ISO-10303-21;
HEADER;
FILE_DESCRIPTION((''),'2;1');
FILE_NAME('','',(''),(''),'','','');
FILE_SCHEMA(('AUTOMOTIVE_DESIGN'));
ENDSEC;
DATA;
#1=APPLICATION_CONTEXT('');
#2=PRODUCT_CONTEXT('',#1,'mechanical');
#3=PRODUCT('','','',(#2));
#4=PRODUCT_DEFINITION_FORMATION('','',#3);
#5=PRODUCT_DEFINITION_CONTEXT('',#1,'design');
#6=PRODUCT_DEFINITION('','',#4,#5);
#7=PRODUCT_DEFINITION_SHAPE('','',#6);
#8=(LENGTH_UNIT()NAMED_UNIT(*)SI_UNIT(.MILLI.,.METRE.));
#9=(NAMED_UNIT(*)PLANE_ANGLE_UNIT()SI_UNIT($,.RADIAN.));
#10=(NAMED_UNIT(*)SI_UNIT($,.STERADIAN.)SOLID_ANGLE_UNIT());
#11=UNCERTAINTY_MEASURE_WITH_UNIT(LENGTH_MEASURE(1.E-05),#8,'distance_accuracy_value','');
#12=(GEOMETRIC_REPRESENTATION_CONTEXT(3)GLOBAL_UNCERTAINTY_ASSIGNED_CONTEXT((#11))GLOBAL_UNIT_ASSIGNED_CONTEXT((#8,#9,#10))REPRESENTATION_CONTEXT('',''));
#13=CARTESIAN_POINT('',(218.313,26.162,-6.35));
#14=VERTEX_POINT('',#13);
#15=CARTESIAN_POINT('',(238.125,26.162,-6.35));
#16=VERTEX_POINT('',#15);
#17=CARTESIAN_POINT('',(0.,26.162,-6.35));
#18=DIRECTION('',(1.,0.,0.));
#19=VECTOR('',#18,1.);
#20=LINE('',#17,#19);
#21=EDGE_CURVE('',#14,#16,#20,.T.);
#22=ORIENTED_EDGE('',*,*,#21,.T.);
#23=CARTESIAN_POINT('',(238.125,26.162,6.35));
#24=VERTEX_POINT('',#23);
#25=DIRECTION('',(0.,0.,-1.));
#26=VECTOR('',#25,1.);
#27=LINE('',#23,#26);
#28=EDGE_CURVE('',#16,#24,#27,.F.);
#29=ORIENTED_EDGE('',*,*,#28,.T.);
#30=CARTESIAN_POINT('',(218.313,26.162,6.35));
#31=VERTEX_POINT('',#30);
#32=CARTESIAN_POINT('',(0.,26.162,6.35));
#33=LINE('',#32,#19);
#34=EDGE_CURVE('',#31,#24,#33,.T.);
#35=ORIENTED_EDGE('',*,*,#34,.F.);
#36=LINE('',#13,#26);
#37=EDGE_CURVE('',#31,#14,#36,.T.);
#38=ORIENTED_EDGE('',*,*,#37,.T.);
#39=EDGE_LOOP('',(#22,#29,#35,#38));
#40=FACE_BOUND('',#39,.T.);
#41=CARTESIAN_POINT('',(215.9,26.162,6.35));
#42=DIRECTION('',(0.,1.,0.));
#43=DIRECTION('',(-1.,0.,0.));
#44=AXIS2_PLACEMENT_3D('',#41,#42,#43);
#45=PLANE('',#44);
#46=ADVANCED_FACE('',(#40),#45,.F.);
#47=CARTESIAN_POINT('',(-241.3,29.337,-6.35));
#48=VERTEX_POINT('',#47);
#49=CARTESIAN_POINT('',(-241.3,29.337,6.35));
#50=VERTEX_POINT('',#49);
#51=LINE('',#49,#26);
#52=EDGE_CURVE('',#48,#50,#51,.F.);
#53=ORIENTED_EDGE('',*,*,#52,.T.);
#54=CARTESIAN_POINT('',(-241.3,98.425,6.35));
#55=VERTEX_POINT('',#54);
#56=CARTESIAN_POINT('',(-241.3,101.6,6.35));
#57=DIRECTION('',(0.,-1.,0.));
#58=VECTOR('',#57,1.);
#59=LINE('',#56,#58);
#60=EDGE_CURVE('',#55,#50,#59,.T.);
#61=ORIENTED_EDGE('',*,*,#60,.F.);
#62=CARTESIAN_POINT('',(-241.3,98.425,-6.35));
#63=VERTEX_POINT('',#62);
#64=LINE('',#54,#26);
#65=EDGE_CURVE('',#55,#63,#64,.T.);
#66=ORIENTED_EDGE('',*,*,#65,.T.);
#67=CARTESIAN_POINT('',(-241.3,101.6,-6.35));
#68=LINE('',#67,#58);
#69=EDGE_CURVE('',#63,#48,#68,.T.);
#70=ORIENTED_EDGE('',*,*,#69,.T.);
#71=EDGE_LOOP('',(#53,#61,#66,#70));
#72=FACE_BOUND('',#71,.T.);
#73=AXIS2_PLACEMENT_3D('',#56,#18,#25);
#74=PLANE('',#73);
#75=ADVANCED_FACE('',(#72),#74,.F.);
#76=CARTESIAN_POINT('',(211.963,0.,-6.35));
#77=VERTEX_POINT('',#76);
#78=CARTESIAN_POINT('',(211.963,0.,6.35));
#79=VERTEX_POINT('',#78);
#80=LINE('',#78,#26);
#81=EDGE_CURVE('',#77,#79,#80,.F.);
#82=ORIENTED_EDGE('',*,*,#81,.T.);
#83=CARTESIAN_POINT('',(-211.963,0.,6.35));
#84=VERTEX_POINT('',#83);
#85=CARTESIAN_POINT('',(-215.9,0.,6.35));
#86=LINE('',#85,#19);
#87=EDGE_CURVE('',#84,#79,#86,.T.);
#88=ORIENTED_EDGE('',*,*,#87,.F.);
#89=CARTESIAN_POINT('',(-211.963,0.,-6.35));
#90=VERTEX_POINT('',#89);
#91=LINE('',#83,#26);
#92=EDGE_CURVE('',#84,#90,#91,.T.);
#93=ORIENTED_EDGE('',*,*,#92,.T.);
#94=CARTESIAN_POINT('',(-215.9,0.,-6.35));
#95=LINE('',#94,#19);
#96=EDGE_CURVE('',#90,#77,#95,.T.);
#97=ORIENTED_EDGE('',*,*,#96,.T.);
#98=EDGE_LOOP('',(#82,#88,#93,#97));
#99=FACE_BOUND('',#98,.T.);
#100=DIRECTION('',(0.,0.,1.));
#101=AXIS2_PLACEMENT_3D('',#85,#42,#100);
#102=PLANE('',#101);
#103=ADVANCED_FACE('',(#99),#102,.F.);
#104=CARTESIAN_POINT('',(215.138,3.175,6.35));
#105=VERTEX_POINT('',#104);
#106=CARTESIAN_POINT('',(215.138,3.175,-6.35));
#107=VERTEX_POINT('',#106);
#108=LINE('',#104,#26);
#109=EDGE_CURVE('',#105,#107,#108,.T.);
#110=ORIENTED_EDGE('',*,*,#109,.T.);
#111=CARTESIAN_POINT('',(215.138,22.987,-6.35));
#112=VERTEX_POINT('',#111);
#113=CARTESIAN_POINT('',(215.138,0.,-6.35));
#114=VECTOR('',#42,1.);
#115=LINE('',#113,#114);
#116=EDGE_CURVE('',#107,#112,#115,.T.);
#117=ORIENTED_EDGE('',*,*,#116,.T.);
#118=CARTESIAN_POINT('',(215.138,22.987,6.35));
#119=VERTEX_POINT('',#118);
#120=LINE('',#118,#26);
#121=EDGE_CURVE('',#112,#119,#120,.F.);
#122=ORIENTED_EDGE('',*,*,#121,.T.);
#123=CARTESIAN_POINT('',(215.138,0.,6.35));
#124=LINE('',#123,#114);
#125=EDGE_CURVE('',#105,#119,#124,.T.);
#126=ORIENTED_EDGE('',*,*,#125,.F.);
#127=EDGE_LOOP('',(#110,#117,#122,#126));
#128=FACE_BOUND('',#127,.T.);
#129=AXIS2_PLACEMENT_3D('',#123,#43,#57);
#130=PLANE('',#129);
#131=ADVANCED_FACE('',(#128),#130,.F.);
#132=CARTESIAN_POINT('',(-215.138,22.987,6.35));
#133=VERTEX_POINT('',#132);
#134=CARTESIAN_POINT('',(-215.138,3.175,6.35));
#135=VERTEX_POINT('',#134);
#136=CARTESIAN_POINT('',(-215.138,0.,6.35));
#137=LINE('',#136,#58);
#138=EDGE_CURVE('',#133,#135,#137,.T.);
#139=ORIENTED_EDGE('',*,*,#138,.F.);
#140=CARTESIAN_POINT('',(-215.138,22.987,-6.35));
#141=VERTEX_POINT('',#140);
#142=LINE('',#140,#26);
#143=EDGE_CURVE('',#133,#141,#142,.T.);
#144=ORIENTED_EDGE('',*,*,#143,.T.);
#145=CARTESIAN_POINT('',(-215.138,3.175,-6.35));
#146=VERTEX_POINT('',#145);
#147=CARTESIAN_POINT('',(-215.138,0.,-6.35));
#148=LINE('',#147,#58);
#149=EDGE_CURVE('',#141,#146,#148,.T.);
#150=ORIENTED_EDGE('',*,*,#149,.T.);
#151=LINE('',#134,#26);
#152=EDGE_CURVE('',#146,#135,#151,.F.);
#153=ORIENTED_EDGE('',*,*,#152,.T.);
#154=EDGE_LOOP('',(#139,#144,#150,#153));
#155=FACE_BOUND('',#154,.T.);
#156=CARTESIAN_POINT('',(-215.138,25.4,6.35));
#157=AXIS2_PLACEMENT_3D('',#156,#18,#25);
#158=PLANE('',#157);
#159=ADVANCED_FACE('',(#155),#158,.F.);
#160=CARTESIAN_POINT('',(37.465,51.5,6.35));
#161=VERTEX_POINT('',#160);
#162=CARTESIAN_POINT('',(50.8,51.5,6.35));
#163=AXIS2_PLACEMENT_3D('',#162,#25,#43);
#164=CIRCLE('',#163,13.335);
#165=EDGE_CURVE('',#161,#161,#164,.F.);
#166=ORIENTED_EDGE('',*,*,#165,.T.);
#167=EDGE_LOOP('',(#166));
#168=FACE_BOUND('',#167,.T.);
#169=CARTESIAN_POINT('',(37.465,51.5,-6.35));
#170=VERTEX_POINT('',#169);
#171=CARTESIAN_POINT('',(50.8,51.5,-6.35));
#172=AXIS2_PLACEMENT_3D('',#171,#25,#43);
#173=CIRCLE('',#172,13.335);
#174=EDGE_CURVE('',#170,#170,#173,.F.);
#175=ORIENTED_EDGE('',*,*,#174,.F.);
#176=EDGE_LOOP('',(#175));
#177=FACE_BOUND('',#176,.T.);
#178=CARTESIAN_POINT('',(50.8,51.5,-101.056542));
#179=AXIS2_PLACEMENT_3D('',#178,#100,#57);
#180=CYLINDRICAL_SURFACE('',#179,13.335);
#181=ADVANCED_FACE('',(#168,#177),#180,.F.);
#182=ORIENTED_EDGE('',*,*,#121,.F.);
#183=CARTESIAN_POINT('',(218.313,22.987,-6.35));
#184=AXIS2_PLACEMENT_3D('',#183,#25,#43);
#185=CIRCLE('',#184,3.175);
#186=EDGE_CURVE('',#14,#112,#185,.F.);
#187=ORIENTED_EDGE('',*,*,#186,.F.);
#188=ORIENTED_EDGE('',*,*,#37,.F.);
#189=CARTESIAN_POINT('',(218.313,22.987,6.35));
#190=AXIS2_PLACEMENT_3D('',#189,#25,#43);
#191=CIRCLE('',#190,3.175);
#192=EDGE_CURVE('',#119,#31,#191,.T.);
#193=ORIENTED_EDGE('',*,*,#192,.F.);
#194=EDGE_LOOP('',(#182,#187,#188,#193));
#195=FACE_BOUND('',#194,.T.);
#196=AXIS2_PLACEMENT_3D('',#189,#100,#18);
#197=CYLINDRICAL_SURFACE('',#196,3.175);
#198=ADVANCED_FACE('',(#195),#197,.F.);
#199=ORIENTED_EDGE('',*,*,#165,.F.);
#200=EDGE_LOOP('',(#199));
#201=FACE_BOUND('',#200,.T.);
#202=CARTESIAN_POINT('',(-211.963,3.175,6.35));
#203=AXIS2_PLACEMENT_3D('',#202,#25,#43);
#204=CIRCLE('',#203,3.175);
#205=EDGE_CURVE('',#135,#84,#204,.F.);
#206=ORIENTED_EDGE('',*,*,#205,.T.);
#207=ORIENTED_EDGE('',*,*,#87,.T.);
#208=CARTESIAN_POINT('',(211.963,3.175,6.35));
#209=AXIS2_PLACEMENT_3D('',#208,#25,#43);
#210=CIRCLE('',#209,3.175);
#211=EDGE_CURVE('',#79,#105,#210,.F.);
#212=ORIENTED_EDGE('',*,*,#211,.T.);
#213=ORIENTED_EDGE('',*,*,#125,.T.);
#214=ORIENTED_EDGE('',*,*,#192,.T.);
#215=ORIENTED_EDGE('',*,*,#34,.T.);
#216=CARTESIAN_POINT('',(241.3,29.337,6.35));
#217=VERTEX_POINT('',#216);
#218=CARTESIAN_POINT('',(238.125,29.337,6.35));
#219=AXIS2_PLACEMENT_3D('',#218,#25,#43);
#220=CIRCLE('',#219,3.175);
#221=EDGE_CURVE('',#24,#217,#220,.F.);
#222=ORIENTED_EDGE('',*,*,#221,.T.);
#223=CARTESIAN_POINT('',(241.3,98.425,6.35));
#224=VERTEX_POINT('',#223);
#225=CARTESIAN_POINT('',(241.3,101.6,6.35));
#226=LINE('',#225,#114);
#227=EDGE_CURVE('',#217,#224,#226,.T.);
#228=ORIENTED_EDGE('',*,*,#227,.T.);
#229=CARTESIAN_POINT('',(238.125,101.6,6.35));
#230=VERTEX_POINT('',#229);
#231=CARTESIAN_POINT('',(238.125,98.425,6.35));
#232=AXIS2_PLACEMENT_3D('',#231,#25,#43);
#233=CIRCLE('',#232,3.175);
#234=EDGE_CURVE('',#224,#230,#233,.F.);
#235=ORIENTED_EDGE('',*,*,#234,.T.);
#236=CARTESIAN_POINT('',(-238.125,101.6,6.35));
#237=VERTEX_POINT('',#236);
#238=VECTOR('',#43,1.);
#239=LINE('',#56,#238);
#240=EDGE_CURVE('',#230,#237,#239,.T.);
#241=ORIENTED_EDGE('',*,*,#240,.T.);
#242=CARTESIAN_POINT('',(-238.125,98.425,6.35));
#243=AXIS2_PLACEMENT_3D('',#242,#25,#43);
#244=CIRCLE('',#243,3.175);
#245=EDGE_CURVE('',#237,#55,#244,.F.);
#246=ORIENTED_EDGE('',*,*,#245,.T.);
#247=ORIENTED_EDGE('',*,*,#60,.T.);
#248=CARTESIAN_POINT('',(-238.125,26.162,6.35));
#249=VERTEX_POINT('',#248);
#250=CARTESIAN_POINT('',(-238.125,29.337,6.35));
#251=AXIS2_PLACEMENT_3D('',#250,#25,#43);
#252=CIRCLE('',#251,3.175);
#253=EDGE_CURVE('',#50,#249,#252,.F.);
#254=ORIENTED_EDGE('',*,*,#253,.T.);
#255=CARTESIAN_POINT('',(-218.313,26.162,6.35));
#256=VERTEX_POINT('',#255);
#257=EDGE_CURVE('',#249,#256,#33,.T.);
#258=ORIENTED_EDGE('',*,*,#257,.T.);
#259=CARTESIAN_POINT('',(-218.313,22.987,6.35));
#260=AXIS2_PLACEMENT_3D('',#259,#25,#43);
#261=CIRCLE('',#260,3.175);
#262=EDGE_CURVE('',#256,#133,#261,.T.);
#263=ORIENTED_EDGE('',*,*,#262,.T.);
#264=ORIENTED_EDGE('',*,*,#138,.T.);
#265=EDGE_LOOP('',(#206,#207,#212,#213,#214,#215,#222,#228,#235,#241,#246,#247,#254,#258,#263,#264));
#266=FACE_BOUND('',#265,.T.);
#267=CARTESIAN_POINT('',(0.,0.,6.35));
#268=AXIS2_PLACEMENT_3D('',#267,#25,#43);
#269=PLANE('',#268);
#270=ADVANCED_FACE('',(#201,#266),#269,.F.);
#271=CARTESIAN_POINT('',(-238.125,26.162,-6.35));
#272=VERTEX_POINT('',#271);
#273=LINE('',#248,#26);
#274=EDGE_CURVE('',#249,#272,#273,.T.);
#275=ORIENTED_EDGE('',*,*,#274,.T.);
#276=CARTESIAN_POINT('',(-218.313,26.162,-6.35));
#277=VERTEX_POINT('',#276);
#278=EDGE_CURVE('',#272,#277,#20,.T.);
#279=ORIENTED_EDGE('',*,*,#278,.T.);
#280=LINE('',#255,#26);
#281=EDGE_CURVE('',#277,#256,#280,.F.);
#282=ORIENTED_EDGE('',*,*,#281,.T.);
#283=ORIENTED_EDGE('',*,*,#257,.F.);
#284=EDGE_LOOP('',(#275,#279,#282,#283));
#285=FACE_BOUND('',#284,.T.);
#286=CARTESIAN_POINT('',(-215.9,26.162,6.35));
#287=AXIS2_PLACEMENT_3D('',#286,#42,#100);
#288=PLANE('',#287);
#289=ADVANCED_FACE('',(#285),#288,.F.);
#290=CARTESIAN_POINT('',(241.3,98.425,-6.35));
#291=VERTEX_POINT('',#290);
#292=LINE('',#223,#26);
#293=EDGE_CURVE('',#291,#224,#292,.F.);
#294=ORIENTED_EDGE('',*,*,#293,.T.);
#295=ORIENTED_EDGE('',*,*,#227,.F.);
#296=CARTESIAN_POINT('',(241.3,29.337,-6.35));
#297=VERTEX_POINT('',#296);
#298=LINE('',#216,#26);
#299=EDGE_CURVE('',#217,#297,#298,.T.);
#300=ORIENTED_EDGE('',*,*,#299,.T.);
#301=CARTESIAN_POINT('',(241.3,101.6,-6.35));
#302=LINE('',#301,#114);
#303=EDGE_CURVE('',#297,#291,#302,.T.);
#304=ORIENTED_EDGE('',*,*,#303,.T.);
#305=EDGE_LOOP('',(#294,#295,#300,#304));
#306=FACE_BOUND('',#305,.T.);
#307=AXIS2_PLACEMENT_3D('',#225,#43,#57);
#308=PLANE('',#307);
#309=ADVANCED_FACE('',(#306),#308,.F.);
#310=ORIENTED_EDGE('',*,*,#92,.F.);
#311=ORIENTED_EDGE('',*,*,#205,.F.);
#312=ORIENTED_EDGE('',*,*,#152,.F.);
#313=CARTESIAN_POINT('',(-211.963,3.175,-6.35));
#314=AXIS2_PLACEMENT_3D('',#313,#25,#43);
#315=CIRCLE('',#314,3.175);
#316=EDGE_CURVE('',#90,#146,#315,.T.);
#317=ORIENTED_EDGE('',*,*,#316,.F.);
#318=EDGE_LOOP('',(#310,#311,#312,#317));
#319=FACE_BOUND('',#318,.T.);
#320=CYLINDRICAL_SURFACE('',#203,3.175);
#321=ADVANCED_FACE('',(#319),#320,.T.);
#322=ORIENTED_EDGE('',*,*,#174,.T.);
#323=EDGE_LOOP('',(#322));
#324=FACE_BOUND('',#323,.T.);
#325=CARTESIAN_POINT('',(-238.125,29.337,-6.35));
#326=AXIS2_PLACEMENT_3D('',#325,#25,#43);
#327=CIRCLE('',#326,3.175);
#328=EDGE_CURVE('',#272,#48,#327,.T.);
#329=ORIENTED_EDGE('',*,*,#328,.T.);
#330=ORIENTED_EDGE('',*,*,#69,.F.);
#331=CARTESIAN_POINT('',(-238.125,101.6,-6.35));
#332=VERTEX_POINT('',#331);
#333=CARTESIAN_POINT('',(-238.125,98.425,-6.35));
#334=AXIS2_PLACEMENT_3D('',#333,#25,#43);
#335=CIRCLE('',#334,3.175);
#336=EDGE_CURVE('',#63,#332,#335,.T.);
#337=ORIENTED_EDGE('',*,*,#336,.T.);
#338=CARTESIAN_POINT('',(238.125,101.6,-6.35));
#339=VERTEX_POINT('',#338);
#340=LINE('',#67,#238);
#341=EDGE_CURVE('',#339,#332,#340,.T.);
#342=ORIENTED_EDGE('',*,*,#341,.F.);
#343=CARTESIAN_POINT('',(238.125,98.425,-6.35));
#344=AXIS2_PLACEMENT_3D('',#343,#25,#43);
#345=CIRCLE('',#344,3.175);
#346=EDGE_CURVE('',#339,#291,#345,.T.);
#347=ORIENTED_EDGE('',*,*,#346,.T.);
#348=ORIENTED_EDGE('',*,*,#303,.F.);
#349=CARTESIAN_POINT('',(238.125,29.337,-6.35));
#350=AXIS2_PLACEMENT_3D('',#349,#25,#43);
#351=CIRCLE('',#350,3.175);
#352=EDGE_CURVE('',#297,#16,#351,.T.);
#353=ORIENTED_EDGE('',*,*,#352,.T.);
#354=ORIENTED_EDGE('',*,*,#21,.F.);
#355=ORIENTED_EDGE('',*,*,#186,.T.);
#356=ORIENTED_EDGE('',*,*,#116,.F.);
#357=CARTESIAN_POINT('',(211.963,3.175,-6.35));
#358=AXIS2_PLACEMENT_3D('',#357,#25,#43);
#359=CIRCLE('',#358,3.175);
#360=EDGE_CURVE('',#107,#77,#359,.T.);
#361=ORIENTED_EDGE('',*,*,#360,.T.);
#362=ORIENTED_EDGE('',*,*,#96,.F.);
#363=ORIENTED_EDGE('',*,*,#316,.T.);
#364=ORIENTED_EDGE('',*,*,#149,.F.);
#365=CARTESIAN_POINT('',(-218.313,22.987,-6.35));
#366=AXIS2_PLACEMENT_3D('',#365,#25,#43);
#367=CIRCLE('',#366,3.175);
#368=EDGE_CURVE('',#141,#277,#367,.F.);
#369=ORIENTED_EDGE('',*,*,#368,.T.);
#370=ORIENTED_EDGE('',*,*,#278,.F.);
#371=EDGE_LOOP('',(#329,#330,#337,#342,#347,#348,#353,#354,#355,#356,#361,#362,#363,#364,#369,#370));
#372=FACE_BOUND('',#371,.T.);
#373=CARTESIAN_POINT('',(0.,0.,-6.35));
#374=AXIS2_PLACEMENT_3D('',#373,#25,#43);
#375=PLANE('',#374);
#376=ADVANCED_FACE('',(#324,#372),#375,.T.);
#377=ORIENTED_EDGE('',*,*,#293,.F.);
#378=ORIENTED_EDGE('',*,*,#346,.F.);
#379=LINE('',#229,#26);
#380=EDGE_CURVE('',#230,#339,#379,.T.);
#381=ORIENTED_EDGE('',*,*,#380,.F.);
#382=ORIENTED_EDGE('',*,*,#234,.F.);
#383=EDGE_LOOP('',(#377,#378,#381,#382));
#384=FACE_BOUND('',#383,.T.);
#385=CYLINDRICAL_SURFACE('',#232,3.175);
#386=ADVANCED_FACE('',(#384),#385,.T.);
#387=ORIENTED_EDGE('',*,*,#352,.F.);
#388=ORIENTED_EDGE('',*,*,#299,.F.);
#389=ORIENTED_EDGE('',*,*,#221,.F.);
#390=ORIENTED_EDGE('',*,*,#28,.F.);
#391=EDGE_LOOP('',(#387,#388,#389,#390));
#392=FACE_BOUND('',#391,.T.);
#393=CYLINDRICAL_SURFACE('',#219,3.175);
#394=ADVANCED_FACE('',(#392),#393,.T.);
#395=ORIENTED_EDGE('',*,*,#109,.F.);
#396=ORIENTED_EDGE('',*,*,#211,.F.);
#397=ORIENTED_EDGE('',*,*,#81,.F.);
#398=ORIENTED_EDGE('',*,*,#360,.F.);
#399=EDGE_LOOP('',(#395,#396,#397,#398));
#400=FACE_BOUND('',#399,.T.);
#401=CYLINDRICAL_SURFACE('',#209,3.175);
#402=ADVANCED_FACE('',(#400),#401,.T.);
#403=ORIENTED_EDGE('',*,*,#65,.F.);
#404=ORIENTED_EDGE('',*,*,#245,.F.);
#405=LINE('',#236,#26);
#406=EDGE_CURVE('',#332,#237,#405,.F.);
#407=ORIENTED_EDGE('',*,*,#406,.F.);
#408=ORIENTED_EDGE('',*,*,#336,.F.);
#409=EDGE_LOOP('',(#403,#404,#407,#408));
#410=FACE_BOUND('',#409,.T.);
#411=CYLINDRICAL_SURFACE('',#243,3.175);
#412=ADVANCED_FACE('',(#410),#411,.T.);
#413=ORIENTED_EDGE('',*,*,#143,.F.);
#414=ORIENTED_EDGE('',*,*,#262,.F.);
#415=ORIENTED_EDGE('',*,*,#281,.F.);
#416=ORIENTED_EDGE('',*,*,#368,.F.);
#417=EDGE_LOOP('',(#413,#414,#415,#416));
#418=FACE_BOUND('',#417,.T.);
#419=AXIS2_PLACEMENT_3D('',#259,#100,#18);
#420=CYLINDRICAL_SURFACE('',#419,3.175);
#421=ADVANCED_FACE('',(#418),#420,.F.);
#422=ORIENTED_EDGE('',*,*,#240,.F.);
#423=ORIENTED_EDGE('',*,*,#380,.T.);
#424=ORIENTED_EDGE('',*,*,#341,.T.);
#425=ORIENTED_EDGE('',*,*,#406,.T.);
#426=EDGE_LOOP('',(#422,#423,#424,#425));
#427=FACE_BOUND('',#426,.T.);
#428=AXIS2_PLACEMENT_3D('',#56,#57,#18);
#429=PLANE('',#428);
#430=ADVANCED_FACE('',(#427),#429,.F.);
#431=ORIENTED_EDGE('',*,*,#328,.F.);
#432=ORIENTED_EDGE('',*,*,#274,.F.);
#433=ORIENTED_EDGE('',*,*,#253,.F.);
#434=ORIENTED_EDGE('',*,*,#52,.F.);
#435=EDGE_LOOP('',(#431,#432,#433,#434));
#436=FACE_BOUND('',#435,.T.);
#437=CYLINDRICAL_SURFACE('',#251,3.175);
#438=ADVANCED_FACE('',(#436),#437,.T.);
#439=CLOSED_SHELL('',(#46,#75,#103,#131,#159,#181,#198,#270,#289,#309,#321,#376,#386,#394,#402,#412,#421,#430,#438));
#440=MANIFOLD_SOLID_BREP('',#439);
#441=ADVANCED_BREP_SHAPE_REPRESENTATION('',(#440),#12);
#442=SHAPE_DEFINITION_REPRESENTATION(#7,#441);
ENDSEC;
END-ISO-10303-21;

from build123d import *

# Parameters (mm, degrees)
BOSS_EXTRUDE1_DEPTH = 6.35
CAVITY1_START       = -6.35
CAVITY1_OUTLINE_R   = 12.7
CAVITY1_DEPTH       = 12.7
MOVE_FACE_SLOT_BY   = 0.762
MOVE_FACE_SLOT_2_BY = 0.762
MOVE_FACE_SLOT_3_BY = 0.762
MOVE_FACE_SLOT_4_BY = 0.762
FILLET1_R           = 3.175
MOVE_FACE_HOLE_BY   = 0.635


# Read off the part's stored shape, not the designer's step: Cavity1
with BuildPart() as part:
    # Sketch1 → Boss-Extrude1 (new, symmetric)
    with BuildSketch(Plane.XY):
        Polygon((-215.9, 0), (215.9, 0), (215.9, 25.4), (241.3, 25.4), (241.3, 101.6), (-241.3, 101.6), (-241.3, 25.4), (-215.9, 25.4), align=None)
    extrude(amount=BOSS_EXTRUDE1_DEPTH, both=True)

    # Cavity1 outline → Cavity1 (cut)
    with BuildSketch(Plane.XY.offset(CAVITY1_START)):
        with Locations((50.8, 51.5)):
            Circle(CAVITY1_OUTLINE_R)
    extrude(amount=CAVITY1_DEPTH, mode=Mode.SUBTRACT)

    # Move Face slot: a face moved inward by 0.762
    extrude(part.faces().sort_by_distance((-228.6, 25.4, 0))[0], amount=MOVE_FACE_SLOT_BY, dir=(0, 1, 0), mode=Mode.SUBTRACT)

    # Move Face slot 2: a face moved inward by 0.762
    extrude(part.faces().sort_by_distance((-215.9, 12.7, 0))[0], amount=MOVE_FACE_SLOT_2_BY, dir=(1, 0, 0), mode=Mode.SUBTRACT)

    # Move Face slot 3: a face moved inward by 0.762
    extrude(part.faces().sort_by_distance((215.9, 12.7, 0))[0], amount=MOVE_FACE_SLOT_3_BY, dir=(-1, 0, 0), mode=Mode.SUBTRACT)

    # Move Face slot 4: a face moved inward by 0.762
    extrude(part.faces().sort_by_distance((228.6, 25.4, 0))[0], amount=MOVE_FACE_SLOT_4_BY, dir=(0, 1, 0), mode=Mode.SUBTRACT)

    # Fillet1
    fillet1_edges = [part.edges().sort_by_distance(p)[0] for p in [
        (215.138, 0, 0),
        (215.138, 26.162, 0),
        (241.3, 26.162, 0),
        (241.3, 101.6, 0),
        (-241.3, 101.6, 0),
        (-241.3, 26.162, 0),
        (-215.138, 26.162, 0),
        (-215.138, 0, 0),
    ]]
    fillet(fillet1_edges, radius=FILLET1_R)

    # Move Face hole: a curved face moved inward by 0.635
    add(Solid.thicken(part.faces().sort_by_distance((38.1, 51.5, 0))[0], -MOVE_FACE_HOLE_BY), mode=Mode.SUBTRACT)


solid = part.part
